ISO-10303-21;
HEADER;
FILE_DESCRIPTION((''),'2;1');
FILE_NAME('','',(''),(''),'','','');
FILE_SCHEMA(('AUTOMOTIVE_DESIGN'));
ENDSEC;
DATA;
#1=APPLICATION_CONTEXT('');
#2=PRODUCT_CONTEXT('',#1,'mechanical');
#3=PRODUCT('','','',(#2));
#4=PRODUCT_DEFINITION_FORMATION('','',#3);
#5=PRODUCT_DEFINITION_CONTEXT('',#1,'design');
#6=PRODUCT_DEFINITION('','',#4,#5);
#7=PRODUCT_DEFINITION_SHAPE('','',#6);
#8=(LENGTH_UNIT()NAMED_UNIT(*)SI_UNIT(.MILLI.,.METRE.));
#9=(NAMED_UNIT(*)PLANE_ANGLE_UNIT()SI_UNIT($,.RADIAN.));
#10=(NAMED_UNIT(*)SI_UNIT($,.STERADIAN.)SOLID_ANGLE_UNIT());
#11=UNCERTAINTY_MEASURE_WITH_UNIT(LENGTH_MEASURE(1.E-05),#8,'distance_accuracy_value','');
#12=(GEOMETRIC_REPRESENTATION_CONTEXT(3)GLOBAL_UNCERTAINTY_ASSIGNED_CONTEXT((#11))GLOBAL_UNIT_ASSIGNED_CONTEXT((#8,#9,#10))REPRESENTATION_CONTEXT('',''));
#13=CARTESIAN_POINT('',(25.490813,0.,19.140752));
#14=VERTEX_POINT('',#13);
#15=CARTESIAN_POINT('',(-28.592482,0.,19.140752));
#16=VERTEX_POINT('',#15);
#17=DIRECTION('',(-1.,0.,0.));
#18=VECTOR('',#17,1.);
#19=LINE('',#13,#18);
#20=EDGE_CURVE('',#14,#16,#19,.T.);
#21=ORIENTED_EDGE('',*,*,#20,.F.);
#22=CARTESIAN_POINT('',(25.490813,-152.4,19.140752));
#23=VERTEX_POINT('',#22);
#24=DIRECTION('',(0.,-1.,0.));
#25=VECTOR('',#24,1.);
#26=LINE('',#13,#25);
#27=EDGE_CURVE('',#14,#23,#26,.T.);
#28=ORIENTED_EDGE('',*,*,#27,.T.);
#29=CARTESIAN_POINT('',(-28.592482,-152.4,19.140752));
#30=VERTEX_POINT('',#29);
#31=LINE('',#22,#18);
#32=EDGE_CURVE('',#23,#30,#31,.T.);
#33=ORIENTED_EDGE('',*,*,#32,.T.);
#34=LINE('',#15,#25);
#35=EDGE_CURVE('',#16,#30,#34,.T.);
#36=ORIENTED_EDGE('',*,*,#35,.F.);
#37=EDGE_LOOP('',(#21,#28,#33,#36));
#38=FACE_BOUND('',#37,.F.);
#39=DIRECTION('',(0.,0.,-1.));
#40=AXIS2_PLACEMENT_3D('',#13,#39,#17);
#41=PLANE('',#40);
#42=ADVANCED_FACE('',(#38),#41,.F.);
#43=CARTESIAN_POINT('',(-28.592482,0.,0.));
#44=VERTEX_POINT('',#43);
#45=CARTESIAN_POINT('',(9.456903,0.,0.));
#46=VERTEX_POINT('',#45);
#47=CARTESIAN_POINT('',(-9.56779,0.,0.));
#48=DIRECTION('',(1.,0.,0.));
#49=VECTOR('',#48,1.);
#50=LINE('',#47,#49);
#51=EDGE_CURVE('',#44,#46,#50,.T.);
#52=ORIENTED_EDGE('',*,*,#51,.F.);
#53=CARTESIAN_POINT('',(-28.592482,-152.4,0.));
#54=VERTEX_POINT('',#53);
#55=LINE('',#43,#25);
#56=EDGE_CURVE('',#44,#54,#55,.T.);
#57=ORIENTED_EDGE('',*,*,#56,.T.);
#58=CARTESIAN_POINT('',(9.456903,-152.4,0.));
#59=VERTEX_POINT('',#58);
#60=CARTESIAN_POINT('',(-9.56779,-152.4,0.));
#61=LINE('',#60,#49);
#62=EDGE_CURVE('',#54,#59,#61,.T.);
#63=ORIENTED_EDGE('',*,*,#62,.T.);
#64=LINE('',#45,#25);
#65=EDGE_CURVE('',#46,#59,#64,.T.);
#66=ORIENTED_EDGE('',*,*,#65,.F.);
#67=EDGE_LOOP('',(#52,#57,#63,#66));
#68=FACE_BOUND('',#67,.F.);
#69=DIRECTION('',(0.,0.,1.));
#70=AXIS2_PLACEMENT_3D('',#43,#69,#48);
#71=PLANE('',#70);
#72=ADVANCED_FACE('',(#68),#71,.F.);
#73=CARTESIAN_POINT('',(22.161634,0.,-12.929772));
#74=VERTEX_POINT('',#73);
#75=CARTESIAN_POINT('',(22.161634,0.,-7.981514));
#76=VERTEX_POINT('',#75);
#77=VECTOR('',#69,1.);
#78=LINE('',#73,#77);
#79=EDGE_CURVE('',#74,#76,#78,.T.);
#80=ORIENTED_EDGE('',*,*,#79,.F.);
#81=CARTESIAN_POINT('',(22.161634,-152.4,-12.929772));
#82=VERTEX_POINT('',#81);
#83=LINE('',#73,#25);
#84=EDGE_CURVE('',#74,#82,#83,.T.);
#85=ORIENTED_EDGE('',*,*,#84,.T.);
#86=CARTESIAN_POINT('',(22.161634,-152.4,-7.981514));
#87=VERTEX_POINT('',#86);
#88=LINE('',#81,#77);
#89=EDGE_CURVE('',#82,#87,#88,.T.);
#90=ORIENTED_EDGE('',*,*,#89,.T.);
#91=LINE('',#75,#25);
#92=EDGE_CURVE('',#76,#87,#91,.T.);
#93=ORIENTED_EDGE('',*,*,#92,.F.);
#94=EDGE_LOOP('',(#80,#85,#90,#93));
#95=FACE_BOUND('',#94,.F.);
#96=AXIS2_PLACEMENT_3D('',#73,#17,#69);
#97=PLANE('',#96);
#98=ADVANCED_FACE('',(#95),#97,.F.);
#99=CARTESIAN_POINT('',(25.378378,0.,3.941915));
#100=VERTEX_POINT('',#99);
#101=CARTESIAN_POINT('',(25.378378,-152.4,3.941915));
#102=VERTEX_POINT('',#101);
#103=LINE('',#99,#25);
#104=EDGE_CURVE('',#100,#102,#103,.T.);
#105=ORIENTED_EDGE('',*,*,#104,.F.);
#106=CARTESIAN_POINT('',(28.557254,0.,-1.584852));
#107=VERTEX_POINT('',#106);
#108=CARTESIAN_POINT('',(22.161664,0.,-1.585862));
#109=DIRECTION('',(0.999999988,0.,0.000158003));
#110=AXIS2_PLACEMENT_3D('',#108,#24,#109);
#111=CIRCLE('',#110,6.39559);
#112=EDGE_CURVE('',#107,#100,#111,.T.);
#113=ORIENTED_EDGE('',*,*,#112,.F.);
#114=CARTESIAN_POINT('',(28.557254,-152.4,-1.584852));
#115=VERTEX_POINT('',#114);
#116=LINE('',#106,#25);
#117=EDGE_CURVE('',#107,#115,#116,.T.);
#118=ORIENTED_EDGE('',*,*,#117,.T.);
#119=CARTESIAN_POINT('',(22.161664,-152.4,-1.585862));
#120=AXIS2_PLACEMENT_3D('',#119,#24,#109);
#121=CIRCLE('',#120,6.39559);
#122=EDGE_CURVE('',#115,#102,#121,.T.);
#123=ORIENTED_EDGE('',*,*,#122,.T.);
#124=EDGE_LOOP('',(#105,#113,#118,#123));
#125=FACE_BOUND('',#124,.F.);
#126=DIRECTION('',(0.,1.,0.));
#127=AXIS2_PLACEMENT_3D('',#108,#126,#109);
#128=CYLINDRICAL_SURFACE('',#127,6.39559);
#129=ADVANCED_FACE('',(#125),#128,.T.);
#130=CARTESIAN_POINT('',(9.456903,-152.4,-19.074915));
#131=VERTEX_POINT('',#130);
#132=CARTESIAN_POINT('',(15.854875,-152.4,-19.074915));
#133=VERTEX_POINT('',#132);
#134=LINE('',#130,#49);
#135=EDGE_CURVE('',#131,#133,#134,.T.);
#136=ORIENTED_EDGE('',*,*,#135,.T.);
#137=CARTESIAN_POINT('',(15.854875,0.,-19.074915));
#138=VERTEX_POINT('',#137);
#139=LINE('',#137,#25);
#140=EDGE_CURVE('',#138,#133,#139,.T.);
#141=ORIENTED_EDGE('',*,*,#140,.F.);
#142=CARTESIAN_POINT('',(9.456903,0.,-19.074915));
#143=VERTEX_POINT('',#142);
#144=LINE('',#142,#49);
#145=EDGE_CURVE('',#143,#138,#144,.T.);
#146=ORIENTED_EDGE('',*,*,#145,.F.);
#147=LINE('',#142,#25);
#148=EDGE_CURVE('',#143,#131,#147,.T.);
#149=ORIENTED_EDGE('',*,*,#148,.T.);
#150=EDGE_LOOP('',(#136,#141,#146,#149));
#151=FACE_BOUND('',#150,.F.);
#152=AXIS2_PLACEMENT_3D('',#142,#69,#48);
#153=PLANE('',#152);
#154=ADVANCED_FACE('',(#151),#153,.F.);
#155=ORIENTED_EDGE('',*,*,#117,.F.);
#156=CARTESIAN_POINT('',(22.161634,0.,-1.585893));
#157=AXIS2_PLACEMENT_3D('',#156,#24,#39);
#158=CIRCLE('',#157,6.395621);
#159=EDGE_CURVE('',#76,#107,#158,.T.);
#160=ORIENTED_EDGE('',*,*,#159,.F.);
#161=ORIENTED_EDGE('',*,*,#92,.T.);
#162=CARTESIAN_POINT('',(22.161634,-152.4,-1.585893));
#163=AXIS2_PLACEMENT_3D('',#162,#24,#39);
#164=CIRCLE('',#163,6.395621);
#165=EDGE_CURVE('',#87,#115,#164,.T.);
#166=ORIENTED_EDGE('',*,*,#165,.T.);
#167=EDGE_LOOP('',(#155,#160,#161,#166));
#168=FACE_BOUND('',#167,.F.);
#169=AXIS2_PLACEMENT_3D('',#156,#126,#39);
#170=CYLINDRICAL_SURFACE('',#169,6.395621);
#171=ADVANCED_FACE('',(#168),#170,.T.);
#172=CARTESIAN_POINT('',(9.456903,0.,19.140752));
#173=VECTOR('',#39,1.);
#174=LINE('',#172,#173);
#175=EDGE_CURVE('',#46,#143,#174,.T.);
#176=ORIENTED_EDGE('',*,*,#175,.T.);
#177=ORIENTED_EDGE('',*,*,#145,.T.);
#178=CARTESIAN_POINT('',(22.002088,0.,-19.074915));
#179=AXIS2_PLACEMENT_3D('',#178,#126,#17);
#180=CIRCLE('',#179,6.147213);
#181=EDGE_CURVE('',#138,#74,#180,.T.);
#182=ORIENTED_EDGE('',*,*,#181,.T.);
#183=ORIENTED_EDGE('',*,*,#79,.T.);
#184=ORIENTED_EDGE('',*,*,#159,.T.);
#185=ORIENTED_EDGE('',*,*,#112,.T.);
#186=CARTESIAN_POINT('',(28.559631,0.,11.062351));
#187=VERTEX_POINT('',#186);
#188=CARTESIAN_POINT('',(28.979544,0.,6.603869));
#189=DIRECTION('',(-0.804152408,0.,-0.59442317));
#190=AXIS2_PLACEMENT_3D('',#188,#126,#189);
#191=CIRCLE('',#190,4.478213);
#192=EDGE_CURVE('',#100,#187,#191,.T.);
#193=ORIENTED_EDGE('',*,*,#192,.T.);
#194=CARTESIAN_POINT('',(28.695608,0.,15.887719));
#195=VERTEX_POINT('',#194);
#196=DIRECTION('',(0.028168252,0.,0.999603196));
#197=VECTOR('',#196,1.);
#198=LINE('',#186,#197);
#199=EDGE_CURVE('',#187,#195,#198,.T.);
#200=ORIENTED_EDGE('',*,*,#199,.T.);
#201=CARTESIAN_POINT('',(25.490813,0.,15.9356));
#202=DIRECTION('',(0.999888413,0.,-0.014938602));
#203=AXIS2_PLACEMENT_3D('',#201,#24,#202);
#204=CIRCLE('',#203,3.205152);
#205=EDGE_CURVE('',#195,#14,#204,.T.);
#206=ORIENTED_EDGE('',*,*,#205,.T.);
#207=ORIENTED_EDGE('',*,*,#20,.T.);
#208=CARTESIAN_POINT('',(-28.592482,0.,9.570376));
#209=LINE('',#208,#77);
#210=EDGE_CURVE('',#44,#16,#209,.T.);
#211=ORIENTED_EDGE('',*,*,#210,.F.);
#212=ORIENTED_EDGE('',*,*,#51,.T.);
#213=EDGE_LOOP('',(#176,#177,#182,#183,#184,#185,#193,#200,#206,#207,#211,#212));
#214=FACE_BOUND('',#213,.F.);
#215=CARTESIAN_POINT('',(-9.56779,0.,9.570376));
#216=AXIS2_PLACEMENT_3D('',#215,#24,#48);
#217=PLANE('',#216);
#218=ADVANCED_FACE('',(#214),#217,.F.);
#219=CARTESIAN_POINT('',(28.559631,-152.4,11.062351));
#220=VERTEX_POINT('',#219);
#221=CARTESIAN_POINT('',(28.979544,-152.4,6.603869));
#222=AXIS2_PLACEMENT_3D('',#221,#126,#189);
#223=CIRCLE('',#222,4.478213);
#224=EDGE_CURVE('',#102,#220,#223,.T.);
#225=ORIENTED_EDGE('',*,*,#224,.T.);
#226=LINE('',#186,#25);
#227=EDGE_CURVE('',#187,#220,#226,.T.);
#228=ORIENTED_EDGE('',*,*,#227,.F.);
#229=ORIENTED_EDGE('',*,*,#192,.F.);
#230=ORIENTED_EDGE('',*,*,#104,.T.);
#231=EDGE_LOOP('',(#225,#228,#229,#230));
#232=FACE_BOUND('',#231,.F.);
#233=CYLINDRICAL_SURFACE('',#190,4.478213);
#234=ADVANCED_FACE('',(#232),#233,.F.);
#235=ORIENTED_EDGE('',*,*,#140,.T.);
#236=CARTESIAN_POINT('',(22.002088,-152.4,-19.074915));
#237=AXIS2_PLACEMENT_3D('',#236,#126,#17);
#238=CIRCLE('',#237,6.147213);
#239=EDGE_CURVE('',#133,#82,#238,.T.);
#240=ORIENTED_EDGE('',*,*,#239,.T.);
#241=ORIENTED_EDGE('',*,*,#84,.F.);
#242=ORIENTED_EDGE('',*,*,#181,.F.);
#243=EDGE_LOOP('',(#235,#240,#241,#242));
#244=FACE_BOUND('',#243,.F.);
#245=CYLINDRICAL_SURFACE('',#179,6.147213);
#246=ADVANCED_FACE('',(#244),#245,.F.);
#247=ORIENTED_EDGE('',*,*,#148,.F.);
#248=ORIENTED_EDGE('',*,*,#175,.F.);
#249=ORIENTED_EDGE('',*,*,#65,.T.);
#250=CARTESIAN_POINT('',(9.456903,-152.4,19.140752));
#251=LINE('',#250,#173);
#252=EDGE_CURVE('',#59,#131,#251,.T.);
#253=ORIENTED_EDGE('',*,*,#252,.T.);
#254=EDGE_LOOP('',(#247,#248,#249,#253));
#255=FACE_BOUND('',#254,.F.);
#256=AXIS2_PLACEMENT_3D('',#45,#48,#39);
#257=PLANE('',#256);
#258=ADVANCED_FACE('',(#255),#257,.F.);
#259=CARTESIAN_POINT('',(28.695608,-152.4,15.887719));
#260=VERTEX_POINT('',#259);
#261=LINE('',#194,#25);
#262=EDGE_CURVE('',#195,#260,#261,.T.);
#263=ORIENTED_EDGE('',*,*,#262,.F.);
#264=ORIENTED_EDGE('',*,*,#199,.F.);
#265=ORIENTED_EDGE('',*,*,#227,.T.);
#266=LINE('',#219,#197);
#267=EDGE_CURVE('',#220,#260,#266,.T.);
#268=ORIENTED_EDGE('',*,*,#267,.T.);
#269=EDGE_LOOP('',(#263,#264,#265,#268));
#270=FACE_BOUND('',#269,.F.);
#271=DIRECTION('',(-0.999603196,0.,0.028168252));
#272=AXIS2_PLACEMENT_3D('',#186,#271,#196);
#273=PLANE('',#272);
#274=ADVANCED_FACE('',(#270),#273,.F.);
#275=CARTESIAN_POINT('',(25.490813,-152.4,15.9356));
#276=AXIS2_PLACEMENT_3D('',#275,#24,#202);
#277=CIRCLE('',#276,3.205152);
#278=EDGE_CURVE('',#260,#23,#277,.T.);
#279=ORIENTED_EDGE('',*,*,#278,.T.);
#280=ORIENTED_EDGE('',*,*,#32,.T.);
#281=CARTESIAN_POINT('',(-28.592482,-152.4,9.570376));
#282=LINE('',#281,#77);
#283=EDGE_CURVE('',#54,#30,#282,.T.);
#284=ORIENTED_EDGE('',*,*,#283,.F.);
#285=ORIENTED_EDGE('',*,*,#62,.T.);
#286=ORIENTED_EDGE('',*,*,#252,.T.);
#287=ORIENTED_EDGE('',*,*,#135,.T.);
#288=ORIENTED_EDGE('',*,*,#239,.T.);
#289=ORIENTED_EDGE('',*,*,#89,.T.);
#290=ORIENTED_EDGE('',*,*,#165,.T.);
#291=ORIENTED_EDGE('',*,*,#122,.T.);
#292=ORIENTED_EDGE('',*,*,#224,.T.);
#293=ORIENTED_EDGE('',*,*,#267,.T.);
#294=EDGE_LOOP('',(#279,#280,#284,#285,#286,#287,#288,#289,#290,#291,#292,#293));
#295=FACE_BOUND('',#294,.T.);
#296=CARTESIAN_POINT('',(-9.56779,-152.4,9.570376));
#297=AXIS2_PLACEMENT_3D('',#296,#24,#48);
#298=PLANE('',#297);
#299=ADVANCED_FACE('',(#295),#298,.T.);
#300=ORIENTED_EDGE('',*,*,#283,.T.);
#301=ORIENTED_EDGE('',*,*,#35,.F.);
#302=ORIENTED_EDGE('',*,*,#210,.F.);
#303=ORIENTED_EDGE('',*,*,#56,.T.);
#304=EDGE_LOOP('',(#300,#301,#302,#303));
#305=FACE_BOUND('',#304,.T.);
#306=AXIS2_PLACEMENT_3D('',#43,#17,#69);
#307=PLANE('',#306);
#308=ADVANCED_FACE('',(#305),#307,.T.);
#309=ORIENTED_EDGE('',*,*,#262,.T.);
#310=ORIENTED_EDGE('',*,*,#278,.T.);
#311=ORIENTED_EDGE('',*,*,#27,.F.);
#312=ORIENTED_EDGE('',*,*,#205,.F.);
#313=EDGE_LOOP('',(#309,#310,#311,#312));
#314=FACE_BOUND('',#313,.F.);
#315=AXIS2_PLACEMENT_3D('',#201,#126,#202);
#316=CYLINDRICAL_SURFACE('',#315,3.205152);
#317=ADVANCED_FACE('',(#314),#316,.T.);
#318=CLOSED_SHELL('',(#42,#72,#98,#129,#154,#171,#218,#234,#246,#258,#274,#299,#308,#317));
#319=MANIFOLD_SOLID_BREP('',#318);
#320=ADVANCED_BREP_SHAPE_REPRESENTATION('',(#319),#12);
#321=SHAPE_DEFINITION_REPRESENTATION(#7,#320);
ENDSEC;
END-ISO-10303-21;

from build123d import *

# Parameters (mm, degrees)
F0_W     = 38.0493849516
F0_H     = 19.1407520324
F1_DEPTH = 152.4


# Not quite as in the source:
# - ends of sketch curves that miss each other by under 0.0002 mm in the source are joined


with BuildPart() as f1:
    # F0 (on Front) → F1 (new body)
    with BuildSketch(Plane.XZ):
        with Locations((-9.5677897334, 9.5703760162)):
            Rectangle(F0_W, F0_H)
        with BuildLine():
            Line((9.4569027424, 19.1407520324), (9.4569027424, 0))
            Line((9.4569027424, 0), (9.4569027424, -19.074914977))
            Line((9.4569027424, -19.074914977), (15.8548746258, -19.074914977))
            ThreePointArc((15.8548746258, -19.074914977), (17.7121304526, -14.6721322023), (22.1616335674, -12.9297724811))
            Line((22.1616335674, -12.9297724811), (22.1616335674, -7.981513619))
            ThreePointArc((22.1616335674, -7.981513619), (26.6843883176, -6.1079115975), (28.5572540015, -1.5848518815))
            ThreePointArc((28.5572540015, -1.5848518815), (27.7056149725, 1.6028958779), (25.3783776729, 3.941914994))
            ThreePointArc((25.3783776729, 3.941914994), (24.8908493588, 8.4306069892), (28.559631396, 11.0623512867))
            Line((28.559631396, 11.0623512867), (28.695607532, 15.8877193117))
            ThreePointArc((28.695607532, 15.8877193117), (27.7740633897, 18.1849926711), (25.4908129573, 19.1407520324))
            Line((25.4908129573, 19.1407520324), (9.4569027424, 19.1407520324))
        make_face()
    extrude(amount=F1_DEPTH)


solid = f1.part
